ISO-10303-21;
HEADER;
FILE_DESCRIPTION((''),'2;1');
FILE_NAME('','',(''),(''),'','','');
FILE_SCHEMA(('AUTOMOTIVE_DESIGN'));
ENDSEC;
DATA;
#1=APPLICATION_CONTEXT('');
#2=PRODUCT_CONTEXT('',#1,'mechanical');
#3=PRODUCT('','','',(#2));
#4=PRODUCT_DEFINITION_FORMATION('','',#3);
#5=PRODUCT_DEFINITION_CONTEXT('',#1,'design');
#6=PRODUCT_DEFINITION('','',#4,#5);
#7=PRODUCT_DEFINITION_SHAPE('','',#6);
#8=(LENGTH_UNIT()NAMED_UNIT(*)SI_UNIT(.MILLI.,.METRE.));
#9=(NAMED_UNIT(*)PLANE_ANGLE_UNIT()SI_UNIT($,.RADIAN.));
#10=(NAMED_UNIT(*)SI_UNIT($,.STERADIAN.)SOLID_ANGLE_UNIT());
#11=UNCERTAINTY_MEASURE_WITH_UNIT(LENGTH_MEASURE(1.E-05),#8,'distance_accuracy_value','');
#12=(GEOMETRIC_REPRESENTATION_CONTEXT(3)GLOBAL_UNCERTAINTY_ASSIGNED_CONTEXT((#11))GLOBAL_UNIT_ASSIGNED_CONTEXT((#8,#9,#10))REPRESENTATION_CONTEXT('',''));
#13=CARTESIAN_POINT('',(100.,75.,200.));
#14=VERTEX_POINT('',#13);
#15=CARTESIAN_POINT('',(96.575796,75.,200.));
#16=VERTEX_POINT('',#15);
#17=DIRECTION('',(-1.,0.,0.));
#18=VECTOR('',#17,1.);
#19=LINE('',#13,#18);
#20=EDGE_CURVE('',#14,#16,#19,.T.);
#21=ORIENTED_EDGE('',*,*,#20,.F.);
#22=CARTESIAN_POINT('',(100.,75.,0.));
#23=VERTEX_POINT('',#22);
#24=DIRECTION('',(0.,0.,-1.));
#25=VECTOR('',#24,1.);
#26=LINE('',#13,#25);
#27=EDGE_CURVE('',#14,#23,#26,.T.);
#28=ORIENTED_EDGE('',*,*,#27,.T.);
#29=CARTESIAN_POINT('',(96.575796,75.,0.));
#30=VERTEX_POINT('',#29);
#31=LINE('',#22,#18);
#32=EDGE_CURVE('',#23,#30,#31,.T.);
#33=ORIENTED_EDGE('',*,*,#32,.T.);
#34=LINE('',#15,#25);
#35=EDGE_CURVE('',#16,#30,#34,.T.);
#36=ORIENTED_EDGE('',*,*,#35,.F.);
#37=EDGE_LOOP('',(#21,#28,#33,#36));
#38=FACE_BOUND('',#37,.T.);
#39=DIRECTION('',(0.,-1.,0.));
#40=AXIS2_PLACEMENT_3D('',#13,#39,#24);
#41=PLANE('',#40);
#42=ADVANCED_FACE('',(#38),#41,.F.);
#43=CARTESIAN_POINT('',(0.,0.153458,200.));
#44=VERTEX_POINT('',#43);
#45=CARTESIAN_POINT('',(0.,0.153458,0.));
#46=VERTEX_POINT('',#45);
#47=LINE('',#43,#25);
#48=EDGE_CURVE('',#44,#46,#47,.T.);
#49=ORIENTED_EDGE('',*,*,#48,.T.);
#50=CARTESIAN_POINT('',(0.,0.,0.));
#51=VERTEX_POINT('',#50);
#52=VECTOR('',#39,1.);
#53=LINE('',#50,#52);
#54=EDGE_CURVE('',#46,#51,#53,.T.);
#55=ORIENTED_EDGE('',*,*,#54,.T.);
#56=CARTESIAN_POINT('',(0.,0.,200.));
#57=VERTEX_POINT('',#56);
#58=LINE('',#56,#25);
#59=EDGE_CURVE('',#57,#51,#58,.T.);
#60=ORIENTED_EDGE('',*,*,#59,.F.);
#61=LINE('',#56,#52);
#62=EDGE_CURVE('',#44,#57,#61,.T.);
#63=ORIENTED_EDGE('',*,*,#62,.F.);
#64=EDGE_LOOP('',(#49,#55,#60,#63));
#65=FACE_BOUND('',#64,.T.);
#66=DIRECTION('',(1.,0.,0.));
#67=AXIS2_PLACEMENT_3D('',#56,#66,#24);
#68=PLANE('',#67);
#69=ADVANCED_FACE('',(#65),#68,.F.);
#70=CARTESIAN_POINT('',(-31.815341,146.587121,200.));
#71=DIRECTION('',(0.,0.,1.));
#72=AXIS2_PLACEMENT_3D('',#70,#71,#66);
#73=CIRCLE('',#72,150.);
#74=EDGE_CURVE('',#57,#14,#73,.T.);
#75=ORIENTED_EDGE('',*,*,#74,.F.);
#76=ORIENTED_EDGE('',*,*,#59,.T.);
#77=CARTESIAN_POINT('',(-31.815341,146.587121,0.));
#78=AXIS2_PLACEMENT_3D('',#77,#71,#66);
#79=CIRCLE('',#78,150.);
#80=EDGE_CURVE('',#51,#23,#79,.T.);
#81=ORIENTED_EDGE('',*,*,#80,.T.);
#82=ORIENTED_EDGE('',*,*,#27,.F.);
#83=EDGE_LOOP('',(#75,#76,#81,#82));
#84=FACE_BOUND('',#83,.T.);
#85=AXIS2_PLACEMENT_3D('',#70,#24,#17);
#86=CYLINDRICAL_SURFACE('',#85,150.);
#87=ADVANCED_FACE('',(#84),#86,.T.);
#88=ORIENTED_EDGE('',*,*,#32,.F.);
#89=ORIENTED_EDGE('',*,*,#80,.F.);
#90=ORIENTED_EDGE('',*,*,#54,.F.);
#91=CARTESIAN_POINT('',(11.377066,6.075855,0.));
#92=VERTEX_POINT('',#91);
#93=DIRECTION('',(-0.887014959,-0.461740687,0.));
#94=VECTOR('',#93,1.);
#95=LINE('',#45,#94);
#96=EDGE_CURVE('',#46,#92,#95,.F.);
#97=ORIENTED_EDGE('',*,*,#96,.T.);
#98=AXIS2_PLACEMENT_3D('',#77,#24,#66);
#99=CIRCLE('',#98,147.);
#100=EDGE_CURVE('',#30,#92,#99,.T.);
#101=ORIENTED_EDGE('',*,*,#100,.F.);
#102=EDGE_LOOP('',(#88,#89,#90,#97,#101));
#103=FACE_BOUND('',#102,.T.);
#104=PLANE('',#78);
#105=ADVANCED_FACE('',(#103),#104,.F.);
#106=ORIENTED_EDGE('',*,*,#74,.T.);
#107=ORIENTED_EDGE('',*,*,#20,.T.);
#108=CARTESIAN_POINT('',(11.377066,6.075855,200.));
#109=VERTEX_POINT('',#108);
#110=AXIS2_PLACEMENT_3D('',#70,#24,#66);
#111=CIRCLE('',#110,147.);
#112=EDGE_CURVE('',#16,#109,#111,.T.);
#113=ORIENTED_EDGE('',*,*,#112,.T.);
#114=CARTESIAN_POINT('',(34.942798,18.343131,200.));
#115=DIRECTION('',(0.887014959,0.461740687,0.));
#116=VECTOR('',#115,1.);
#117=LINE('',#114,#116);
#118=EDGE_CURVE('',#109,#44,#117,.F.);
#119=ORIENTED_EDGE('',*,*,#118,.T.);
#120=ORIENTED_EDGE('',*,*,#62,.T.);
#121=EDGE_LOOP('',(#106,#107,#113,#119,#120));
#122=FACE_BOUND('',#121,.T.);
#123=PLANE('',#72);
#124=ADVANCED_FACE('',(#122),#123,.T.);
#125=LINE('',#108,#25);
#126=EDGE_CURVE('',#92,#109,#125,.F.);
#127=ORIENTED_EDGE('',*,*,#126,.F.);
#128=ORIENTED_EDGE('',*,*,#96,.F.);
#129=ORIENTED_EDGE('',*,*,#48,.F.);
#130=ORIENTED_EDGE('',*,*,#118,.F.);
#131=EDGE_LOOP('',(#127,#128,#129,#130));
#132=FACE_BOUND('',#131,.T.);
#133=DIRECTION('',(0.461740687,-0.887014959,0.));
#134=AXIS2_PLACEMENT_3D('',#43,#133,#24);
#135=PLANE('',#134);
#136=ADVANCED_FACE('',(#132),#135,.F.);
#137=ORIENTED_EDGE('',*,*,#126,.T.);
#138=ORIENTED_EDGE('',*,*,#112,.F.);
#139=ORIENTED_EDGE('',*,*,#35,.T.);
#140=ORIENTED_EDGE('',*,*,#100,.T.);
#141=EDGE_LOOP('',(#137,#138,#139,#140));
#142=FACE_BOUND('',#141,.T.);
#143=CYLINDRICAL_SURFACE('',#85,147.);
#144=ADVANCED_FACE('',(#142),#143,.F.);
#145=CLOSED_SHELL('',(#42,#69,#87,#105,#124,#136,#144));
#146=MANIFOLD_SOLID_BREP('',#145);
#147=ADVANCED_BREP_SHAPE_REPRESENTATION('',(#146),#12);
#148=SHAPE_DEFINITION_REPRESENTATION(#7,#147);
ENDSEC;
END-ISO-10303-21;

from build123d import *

# Parameters (mm, degrees)
BOSS_EXTRUDE1_DEPTH = 200
CHAMFER1_SIZE       = 2.917865617


with BuildPart() as part:
    # Sketch1 → Boss-Extrude1 (new body)
    with BuildSketch(Plane.XY):
        with BuildLine():
            Line((100, 75), (96.575796241, 75))
            ThreePointArc((96.575796241, 75), (55.991051333, 28.692941942), (0, 3.071323807))
            Line((0, 3.071323807), (0, 0))
            ThreePointArc((0, 0), (58.18465914, 26.587121146), (100, 75))
        make_face()
    extrude(amount=BOSS_EXTRUDE1_DEPTH)

    # Chamfer1
    # the kernel refuses this chamfer: 10, 2.917865617 mm, written as the material it takes off along each edge
    with BuildSketch(Plane(origin=(0, 3.071323807, -30.394078092), x_dir=(0.9668531761663356, 0.25533298991134823, 0), z_dir=(0, 0, 1))) as chamfer1_piece_1:
        with BuildLine():
            Line((11.767108546, 0), (-CHAMFER1_SIZE * 0.255332989918, -CHAMFER1_SIZE * 0.96685317619))
            Line((-CHAMFER1_SIZE * 0.255332989918, -CHAMFER1_SIZE * 0.96685317619), (0, 0))
            ThreePointArc((0, 0), (6.078871228, -0.117659648), (11.767108546, 0))
        make_face()
    extrude(amount=260.788156184, mode=Mode.SUBTRACT)


solid = part.part
